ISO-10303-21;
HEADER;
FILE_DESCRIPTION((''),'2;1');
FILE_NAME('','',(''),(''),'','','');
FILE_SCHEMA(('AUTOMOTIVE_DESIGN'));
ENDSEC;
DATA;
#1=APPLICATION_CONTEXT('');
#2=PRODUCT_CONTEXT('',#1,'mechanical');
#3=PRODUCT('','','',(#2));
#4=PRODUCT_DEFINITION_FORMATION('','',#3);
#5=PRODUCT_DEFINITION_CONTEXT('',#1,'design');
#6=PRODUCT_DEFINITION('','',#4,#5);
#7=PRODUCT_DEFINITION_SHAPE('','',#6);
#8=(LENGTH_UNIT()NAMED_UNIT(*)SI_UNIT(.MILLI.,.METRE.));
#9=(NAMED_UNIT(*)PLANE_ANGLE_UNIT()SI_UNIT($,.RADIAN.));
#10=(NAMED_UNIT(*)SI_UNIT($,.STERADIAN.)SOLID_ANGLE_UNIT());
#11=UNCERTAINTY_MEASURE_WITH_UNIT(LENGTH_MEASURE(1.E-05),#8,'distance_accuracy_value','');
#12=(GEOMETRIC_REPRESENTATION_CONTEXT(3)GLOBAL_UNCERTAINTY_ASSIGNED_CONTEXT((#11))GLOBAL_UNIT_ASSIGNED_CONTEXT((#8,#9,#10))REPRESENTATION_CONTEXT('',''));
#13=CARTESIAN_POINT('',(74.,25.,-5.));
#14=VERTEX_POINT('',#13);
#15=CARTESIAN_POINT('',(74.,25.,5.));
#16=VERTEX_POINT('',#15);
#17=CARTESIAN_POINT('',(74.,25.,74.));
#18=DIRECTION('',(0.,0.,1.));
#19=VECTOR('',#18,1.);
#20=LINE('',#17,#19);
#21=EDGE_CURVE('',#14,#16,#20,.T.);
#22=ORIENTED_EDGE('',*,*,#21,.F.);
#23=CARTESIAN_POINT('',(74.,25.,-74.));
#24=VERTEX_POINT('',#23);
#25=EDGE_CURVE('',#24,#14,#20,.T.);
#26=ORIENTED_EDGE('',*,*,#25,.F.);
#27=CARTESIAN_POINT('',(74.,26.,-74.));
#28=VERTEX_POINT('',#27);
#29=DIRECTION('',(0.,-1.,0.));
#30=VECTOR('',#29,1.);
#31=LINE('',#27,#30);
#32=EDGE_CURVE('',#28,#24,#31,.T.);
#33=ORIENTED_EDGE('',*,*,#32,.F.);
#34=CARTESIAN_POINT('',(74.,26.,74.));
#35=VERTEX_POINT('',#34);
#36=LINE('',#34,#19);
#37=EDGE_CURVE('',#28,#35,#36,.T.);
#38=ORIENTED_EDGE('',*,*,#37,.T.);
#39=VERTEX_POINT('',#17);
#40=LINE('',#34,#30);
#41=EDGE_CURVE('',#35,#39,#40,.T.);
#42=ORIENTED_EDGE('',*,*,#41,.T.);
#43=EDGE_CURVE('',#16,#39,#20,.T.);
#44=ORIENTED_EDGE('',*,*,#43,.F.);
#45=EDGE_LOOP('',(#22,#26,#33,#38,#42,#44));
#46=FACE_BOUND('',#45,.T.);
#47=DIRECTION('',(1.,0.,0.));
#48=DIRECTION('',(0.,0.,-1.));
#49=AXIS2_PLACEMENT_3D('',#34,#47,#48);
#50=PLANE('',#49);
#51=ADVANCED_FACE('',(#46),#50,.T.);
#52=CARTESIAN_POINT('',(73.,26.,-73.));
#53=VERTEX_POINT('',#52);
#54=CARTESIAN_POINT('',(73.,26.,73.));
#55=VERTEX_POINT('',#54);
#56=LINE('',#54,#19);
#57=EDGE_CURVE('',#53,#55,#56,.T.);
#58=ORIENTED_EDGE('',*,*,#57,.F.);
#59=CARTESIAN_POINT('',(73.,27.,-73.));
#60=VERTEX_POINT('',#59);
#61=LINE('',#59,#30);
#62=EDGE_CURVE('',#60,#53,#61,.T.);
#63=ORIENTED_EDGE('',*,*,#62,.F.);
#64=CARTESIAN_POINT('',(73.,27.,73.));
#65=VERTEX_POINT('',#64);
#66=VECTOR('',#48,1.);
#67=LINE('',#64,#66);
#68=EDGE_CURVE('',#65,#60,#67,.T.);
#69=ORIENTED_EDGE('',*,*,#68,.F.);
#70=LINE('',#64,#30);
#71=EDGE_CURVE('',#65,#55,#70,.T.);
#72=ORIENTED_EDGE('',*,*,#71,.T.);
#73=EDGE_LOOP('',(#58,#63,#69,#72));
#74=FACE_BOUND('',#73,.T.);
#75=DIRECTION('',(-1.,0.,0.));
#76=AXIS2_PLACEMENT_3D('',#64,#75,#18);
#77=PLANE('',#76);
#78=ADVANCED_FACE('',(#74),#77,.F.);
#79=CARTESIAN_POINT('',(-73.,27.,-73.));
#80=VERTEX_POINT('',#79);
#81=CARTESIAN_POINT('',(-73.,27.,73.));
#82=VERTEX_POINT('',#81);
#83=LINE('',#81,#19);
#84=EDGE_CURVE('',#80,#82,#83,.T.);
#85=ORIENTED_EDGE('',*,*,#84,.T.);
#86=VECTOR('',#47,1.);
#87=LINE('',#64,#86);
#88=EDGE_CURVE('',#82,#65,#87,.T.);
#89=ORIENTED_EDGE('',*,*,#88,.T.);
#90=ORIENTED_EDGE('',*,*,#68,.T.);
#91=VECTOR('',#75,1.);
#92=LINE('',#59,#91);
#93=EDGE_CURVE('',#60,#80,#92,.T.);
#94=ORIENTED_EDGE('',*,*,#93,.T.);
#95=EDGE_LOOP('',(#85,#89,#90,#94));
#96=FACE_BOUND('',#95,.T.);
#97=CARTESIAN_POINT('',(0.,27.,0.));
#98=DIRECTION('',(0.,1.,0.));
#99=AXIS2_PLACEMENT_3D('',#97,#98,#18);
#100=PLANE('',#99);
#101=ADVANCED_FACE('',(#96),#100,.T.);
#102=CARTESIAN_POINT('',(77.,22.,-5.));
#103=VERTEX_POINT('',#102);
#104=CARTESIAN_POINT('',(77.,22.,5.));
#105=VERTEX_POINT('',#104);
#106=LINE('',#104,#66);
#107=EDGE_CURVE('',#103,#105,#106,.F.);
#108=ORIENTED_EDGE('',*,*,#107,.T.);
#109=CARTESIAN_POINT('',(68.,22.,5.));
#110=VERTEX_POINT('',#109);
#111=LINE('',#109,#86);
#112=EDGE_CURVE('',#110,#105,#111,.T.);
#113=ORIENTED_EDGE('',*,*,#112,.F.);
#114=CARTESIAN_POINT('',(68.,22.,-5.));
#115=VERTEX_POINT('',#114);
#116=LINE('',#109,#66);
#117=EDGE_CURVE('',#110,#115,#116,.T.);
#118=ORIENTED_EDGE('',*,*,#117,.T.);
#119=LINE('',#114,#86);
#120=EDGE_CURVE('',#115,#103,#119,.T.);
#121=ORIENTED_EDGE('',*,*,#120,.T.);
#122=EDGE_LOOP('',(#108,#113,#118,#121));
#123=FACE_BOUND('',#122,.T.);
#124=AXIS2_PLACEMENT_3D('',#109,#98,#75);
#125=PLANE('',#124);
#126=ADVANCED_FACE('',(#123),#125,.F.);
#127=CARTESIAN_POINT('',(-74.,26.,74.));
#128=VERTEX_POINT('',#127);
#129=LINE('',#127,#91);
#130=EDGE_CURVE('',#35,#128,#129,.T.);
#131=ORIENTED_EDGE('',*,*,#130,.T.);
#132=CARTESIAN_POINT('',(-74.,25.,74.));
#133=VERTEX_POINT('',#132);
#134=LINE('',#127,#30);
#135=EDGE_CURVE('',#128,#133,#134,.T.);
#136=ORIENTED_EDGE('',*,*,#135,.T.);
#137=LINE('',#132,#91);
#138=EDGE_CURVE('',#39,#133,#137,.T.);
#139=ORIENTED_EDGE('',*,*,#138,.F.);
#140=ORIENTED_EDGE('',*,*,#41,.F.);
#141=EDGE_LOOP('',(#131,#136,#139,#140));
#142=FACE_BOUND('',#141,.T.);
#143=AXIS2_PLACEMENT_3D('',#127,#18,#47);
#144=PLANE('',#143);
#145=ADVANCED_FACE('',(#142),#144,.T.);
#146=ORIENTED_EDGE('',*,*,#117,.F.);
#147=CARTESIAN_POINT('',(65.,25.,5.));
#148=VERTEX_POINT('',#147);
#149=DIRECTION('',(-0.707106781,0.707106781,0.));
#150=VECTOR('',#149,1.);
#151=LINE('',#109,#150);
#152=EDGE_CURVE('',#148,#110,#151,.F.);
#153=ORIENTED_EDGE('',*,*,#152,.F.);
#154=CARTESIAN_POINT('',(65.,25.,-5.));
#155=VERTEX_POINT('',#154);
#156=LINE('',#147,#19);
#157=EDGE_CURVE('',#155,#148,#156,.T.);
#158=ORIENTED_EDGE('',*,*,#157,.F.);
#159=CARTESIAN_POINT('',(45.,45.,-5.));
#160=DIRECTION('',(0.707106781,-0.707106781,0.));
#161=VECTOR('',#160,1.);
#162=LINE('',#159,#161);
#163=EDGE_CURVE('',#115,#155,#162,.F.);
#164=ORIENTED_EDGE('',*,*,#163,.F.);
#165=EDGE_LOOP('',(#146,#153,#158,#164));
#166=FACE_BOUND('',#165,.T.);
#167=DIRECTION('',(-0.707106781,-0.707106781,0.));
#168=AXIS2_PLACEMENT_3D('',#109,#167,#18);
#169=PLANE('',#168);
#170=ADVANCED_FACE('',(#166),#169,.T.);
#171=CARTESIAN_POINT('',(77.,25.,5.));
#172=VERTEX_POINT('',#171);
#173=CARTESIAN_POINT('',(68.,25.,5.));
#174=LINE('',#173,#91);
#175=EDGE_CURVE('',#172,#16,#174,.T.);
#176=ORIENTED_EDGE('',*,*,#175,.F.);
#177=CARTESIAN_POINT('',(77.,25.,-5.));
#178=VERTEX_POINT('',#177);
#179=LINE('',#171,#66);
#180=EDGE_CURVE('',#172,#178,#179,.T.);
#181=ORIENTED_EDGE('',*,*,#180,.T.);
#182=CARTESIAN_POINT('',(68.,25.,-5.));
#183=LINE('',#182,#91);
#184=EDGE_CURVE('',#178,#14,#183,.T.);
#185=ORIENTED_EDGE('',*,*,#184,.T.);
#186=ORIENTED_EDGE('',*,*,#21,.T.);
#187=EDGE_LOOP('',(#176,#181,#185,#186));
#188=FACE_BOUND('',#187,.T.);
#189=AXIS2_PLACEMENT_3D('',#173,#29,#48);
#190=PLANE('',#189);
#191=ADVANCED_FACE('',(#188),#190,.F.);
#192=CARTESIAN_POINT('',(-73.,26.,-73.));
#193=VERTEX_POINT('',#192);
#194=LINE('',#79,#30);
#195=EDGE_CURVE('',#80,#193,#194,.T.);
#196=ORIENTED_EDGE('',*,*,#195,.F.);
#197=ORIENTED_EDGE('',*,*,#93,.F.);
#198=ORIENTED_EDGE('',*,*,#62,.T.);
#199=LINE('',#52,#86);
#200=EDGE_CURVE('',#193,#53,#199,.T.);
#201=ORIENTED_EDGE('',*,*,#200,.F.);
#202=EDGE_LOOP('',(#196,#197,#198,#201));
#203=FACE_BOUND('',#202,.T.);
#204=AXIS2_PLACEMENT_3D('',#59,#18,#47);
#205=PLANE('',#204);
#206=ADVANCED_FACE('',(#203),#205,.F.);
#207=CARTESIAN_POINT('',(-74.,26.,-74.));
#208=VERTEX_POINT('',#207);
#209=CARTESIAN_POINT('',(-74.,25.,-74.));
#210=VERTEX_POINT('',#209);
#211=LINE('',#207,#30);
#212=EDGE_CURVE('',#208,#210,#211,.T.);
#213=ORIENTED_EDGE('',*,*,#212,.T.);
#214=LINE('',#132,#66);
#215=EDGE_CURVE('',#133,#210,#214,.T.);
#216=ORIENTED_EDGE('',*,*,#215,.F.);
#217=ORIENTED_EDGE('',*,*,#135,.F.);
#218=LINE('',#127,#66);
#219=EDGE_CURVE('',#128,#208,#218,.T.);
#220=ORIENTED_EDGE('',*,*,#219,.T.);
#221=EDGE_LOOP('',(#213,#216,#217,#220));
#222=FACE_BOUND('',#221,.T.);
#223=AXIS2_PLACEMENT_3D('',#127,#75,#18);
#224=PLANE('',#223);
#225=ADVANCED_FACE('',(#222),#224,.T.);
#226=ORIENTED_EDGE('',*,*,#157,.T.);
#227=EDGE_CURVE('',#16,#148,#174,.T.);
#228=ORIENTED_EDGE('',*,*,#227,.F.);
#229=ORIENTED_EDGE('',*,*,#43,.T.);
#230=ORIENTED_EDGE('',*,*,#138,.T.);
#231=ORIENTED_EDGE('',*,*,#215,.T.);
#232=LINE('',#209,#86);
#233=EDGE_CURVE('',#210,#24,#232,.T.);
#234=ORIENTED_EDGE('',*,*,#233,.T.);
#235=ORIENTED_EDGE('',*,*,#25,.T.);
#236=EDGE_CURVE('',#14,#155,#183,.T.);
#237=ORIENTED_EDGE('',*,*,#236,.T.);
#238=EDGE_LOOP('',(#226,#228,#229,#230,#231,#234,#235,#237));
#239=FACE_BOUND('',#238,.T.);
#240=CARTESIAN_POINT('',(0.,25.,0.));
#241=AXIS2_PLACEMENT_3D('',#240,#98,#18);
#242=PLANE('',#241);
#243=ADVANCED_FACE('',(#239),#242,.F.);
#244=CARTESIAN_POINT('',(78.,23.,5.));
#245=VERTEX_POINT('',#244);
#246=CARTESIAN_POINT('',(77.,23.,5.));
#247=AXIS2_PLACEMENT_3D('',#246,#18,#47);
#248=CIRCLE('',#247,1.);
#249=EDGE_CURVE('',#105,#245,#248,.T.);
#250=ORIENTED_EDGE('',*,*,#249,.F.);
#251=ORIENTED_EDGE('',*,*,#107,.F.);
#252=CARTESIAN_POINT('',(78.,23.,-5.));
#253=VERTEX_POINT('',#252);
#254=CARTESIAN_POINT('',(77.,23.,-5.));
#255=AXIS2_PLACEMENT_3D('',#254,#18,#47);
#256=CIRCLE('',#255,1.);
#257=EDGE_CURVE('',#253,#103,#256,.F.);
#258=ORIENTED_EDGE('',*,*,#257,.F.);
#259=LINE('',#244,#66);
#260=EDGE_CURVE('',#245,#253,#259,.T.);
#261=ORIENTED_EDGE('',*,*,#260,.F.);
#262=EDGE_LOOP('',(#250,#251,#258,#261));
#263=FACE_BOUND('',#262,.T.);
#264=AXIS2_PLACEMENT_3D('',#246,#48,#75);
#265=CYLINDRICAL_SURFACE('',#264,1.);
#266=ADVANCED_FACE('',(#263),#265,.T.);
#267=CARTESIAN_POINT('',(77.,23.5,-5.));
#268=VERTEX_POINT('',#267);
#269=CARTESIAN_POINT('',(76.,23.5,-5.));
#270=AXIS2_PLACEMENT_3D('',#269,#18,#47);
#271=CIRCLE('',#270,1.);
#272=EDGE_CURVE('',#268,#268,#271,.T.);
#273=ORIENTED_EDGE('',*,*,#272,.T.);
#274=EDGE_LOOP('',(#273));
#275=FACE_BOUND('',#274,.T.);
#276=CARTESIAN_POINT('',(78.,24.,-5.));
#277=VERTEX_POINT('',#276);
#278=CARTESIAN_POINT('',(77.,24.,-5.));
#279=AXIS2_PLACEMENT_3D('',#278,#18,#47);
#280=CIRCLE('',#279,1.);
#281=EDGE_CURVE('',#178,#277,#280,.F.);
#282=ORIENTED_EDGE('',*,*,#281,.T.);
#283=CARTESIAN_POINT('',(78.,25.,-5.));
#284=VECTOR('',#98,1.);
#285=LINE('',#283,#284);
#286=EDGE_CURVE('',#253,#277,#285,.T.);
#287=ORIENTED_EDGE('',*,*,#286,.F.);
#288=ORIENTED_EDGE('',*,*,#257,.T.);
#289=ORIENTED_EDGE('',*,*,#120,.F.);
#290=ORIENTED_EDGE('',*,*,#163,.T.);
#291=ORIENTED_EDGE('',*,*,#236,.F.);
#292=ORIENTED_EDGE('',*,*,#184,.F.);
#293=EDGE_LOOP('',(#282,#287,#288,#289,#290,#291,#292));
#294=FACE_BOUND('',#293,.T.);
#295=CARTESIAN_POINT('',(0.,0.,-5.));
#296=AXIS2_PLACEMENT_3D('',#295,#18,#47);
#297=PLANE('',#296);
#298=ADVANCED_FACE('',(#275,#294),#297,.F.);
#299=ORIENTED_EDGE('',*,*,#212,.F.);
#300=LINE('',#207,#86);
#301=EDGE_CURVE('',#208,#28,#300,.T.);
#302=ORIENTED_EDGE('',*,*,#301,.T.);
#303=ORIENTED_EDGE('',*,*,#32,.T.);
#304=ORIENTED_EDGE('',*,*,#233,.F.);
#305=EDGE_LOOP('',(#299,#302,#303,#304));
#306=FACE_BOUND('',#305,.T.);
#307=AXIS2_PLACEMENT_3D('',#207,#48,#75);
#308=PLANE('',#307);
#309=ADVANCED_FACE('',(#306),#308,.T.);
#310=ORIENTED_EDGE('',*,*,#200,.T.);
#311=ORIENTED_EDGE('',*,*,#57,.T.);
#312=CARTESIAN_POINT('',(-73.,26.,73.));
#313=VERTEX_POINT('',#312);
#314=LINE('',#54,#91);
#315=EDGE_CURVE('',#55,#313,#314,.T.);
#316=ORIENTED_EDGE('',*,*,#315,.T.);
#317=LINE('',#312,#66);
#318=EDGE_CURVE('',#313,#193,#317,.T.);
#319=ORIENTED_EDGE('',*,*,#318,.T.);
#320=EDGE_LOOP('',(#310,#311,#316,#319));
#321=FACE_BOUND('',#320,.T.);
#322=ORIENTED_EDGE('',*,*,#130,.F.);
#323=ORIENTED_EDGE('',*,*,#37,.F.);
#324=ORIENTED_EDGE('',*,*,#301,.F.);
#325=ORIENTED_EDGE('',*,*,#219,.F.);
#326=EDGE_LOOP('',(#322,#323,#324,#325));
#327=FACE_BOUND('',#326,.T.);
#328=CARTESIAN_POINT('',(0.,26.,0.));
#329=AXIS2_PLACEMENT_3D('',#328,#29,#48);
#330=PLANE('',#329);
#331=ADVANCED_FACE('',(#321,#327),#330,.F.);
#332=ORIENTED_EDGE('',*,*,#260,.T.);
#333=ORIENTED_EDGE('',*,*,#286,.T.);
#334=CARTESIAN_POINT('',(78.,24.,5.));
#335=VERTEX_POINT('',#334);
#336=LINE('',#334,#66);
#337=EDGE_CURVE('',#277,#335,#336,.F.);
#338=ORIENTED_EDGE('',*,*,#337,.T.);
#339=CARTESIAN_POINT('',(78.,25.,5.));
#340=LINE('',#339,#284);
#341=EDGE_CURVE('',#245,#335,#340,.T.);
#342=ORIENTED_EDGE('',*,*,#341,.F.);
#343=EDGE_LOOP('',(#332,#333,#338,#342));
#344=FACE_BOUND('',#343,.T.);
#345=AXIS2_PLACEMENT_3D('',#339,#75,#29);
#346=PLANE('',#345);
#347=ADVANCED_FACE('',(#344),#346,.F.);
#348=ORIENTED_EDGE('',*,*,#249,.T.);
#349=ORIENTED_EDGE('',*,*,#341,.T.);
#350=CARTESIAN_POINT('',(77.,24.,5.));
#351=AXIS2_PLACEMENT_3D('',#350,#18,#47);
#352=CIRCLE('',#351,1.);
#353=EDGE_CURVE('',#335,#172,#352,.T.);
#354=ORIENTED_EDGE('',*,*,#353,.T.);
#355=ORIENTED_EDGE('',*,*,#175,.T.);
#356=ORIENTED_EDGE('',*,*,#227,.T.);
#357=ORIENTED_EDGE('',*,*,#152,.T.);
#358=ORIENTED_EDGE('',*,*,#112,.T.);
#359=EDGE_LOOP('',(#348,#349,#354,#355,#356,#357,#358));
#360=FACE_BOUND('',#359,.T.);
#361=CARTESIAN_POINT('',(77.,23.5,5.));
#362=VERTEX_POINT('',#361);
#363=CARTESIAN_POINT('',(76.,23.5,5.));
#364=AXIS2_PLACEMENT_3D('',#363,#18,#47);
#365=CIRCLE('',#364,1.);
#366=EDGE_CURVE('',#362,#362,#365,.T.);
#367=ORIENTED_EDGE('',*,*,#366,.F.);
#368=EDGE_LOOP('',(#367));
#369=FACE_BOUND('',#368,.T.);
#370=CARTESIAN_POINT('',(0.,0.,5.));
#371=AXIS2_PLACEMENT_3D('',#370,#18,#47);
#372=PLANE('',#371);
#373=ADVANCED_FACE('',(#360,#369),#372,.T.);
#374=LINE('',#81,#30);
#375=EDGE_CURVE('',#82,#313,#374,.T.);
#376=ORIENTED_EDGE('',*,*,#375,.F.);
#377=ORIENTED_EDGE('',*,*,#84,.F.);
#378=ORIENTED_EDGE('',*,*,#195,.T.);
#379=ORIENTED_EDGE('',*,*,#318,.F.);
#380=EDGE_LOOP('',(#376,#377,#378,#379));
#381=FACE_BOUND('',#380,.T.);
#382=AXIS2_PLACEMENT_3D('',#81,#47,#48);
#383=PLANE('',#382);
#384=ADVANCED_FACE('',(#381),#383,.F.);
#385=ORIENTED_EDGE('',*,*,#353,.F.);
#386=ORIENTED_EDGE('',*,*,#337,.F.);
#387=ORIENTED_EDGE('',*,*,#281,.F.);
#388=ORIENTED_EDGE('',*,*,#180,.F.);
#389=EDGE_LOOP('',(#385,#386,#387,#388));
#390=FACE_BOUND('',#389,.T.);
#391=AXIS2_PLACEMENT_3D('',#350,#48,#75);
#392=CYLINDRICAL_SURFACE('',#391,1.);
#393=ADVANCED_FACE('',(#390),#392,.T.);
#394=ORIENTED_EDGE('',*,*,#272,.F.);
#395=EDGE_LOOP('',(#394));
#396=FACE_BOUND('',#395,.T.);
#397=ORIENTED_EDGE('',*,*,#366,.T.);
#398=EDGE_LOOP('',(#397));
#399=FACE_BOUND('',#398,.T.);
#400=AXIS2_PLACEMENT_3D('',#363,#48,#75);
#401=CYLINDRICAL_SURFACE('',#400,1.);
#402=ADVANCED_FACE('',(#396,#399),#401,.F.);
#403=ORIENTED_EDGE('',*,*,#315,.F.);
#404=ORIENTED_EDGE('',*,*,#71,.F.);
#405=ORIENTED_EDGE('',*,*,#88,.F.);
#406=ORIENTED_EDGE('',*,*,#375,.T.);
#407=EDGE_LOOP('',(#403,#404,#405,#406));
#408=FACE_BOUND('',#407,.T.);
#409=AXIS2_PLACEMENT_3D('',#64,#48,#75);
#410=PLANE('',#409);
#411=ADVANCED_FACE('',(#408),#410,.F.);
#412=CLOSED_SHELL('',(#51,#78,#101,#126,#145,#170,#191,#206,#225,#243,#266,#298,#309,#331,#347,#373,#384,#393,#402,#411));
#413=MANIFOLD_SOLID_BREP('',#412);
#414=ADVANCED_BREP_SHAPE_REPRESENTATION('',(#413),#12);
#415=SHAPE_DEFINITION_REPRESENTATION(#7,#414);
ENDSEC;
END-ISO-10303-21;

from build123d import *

# Parameters (mm, degrees)
SKETCH1_R           = 10
SKETCH1_R_2         = 7.5
BOSS_EXTRUDE1_DEPTH = 25
THREAD1_PITCH       = 0.3175
SKETCH4_W           = 146
SKETCH4_H           = 146
BOSS_EXTRUDE2_DEPTH = 2
SKETCH5_W           = 148
SKETCH5_H           = 148
BOSS_EXTRUDE3_DEPTH = 1
SKETCH6_W           = 10
SKETCH6_H           = 3
SKETCH6_R           = 1
BOSS_EXTRUDE4_DEPTH = 5
CHAMFER2_START      = -5
CHAMFER2_DEPTH      = 10
SKETCH9_R           = 10
CUT_EXTRUDE1_DEPTH  = 111.385687501
FILLET1_R           = 1


with BuildPart() as part:
    # Sketch1 → Boss-Extrude1 (new body)
    with BuildSketch(Plane(origin=(0, 0, 0), x_dir=(1, 0, 0), z_dir=(0, 1, 0))):
        with Locations(Location((0, 0, 0), (0, 0, 270))):
            Circle(SKETCH1_R)
        with Locations(Location((0, 0, 0), (0, 0, 270))):
            Circle(SKETCH1_R_2, mode=Mode.SUBTRACT)
    extrude(amount=BOSS_EXTRUDE1_DEPTH)

    # Thread1: arcs per turn and ends read off the stored shape
    # Thread1: the profile of Thread Profile1 profile screwed along a right-hand helix through 18.897638 turns, 6 arcs to a turn; built about Z, then put on its axis
    thread1_z = Axis((0, 0, 0), (0, 0, 1))
    thread1_corners = [(10.0003, 0, -0.000173205), (10.0003, 0, 0.277985704), (9.828148085, 0, 0.17859375), (9.828148085, 0, 0.09921875)]
    with BuildLine(mode=Mode.PRIVATE) as thread1_profile:
        Line(thread1_corners[0], thread1_corners[1])
        Line(thread1_corners[1], thread1_corners[2])
        Line(thread1_corners[2], thread1_corners[3])
        Line(thread1_corners[3], thread1_corners[0])
    thread1_cap = Face(thread1_profile.wire())
    thread1_turn_angles = [0, 30, 60, 90, 120, 150, 180, 210, 240, 270, 300, 330, 360]
    thread1_turn_weights = [1, 0.8660254037844387, 1, 0.8660254037844387, 1, 0.8660254037844387, 1, 0.8660254037844387, 1, 0.8660254037844387, 1, 0.8660254037844387, 1]
    thread1_turn_rails = [Edge.make_bspline([Vector(p[0], p[1], 0).rotate(thread1_z, thread1_turn_angles[k]) / thread1_turn_weights[k] + Vector(0, 0, p[2] + THREAD1_PITCH * thread1_turn_angles[k] / 360) for k in range(13)], [0, 0, 0, 1, 1, 2, 2, 3, 3, 4, 4, 5, 5, 6, 6, 6], 2, thread1_turn_weights) for p in thread1_corners]
    thread1_turn_sides = [Face.make_surface_from_curves(thread1_turn_rails[p[0]], thread1_turn_rails[p[1]]) for p in [(0, 1), (1, 2), (2, 3), (3, 0)]]
    thread1_last_angles = [6480, 6510, 6540, 6570, 6600, 6630, 6660, 6690, 6720, 6750, 6780, 6791.57480315, 6803.149606299]
    thread1_last_weights = [1, 0.8660254037844387, 1, 0.8660254037844387, 1, 0.8660254037844387, 1, 0.8660254037844387, 1, 0.8660254037844387, 1, 0.9796635825089068, 1]
    thread1_last_rails = [Edge.make_bspline([Vector(p[0], p[1], 0).rotate(thread1_z, thread1_last_angles[k]) / thread1_last_weights[k] + Vector(0, 0, p[2] + THREAD1_PITCH * thread1_last_angles[k] / 360) for k in range(13)], [0, 0, 0, 1, 1, 2, 2, 3, 3, 4, 4, 5, 5, 6, 6, 6], 2, thread1_last_weights) for p in thread1_corners]
    thread1_last_sides = [Face.make_surface_from_curves(thread1_last_rails[p[0]], thread1_last_rails[p[1]]) for p in [(0, 1), (1, 2), (2, 3), (3, 0)]]
    thread1 = Plane(origin=(0, -0.5, 0), x_dir=(1, 0, 0), z_dir=(0, 1, 0)) * Solid(Shell([*[p.moved(Location((0, 0, THREAD1_PITCH * i))) for i in range(18) for p in thread1_turn_sides], *thread1_last_sides, thread1_cap, thread1_cap.rotate(thread1_z, 6803.149606299).moved(Location((0, 0, THREAD1_PITCH * 6803.149606299 / 360)))]))
    add(thread1, mode=Mode.SUBTRACT)

    # Sketch4 → Boss-Extrude2 (add)
    with BuildSketch(Plane(origin=(0, 25, 0), x_dir=(1, 0, 0), z_dir=(0, 1, 0))):
        Rectangle(SKETCH4_W, SKETCH4_H)
    extrude(amount=BOSS_EXTRUDE2_DEPTH)

    # Sketch5 → Boss-Extrude3 (add)
    with BuildSketch(Plane.XZ.offset(-25)):
        Rectangle(SKETCH5_W, SKETCH5_H)
    extrude(amount=-BOSS_EXTRUDE3_DEPTH)

    # Sketch6 → Boss-Extrude4 (add, symmetric)
    with BuildSketch(Plane.XY):
        with Locations((73, 23.5)):
            Rectangle(SKETCH6_W, SKETCH6_H)
        with Locations((76, 23.5)):
            Circle(SKETCH6_R, mode=Mode.SUBTRACT)
    extrude(amount=BOSS_EXTRUDE4_DEPTH, both=True)

    # Chamfer2: read off the stored shape, not the designer's step
    # Chamfer2 outline → Chamfer2 (add)
    with BuildSketch(Plane.XY.offset(CHAMFER2_START)):
        Polygon((68, 25), (65, 25), (68, 22), align=None)
    extrude(amount=CHAMFER2_DEPTH)

    # Sketch9 → Cut-Extrude1 (cut, through all)
    with BuildSketch(Plane.XZ.offset(-25)):
        Circle(SKETCH9_R)
    extrude(amount=CUT_EXTRUDE1_DEPTH, mode=Mode.SUBTRACT)

    # Fillet1
    fillet1_edges = [part.edges().sort_by_distance(p)[0] for p in [
        (78, 22, 0),
        (78, 25, 0),
    ]]
    fillet(fillet1_edges, radius=FILLET1_R)


solid = part.part
